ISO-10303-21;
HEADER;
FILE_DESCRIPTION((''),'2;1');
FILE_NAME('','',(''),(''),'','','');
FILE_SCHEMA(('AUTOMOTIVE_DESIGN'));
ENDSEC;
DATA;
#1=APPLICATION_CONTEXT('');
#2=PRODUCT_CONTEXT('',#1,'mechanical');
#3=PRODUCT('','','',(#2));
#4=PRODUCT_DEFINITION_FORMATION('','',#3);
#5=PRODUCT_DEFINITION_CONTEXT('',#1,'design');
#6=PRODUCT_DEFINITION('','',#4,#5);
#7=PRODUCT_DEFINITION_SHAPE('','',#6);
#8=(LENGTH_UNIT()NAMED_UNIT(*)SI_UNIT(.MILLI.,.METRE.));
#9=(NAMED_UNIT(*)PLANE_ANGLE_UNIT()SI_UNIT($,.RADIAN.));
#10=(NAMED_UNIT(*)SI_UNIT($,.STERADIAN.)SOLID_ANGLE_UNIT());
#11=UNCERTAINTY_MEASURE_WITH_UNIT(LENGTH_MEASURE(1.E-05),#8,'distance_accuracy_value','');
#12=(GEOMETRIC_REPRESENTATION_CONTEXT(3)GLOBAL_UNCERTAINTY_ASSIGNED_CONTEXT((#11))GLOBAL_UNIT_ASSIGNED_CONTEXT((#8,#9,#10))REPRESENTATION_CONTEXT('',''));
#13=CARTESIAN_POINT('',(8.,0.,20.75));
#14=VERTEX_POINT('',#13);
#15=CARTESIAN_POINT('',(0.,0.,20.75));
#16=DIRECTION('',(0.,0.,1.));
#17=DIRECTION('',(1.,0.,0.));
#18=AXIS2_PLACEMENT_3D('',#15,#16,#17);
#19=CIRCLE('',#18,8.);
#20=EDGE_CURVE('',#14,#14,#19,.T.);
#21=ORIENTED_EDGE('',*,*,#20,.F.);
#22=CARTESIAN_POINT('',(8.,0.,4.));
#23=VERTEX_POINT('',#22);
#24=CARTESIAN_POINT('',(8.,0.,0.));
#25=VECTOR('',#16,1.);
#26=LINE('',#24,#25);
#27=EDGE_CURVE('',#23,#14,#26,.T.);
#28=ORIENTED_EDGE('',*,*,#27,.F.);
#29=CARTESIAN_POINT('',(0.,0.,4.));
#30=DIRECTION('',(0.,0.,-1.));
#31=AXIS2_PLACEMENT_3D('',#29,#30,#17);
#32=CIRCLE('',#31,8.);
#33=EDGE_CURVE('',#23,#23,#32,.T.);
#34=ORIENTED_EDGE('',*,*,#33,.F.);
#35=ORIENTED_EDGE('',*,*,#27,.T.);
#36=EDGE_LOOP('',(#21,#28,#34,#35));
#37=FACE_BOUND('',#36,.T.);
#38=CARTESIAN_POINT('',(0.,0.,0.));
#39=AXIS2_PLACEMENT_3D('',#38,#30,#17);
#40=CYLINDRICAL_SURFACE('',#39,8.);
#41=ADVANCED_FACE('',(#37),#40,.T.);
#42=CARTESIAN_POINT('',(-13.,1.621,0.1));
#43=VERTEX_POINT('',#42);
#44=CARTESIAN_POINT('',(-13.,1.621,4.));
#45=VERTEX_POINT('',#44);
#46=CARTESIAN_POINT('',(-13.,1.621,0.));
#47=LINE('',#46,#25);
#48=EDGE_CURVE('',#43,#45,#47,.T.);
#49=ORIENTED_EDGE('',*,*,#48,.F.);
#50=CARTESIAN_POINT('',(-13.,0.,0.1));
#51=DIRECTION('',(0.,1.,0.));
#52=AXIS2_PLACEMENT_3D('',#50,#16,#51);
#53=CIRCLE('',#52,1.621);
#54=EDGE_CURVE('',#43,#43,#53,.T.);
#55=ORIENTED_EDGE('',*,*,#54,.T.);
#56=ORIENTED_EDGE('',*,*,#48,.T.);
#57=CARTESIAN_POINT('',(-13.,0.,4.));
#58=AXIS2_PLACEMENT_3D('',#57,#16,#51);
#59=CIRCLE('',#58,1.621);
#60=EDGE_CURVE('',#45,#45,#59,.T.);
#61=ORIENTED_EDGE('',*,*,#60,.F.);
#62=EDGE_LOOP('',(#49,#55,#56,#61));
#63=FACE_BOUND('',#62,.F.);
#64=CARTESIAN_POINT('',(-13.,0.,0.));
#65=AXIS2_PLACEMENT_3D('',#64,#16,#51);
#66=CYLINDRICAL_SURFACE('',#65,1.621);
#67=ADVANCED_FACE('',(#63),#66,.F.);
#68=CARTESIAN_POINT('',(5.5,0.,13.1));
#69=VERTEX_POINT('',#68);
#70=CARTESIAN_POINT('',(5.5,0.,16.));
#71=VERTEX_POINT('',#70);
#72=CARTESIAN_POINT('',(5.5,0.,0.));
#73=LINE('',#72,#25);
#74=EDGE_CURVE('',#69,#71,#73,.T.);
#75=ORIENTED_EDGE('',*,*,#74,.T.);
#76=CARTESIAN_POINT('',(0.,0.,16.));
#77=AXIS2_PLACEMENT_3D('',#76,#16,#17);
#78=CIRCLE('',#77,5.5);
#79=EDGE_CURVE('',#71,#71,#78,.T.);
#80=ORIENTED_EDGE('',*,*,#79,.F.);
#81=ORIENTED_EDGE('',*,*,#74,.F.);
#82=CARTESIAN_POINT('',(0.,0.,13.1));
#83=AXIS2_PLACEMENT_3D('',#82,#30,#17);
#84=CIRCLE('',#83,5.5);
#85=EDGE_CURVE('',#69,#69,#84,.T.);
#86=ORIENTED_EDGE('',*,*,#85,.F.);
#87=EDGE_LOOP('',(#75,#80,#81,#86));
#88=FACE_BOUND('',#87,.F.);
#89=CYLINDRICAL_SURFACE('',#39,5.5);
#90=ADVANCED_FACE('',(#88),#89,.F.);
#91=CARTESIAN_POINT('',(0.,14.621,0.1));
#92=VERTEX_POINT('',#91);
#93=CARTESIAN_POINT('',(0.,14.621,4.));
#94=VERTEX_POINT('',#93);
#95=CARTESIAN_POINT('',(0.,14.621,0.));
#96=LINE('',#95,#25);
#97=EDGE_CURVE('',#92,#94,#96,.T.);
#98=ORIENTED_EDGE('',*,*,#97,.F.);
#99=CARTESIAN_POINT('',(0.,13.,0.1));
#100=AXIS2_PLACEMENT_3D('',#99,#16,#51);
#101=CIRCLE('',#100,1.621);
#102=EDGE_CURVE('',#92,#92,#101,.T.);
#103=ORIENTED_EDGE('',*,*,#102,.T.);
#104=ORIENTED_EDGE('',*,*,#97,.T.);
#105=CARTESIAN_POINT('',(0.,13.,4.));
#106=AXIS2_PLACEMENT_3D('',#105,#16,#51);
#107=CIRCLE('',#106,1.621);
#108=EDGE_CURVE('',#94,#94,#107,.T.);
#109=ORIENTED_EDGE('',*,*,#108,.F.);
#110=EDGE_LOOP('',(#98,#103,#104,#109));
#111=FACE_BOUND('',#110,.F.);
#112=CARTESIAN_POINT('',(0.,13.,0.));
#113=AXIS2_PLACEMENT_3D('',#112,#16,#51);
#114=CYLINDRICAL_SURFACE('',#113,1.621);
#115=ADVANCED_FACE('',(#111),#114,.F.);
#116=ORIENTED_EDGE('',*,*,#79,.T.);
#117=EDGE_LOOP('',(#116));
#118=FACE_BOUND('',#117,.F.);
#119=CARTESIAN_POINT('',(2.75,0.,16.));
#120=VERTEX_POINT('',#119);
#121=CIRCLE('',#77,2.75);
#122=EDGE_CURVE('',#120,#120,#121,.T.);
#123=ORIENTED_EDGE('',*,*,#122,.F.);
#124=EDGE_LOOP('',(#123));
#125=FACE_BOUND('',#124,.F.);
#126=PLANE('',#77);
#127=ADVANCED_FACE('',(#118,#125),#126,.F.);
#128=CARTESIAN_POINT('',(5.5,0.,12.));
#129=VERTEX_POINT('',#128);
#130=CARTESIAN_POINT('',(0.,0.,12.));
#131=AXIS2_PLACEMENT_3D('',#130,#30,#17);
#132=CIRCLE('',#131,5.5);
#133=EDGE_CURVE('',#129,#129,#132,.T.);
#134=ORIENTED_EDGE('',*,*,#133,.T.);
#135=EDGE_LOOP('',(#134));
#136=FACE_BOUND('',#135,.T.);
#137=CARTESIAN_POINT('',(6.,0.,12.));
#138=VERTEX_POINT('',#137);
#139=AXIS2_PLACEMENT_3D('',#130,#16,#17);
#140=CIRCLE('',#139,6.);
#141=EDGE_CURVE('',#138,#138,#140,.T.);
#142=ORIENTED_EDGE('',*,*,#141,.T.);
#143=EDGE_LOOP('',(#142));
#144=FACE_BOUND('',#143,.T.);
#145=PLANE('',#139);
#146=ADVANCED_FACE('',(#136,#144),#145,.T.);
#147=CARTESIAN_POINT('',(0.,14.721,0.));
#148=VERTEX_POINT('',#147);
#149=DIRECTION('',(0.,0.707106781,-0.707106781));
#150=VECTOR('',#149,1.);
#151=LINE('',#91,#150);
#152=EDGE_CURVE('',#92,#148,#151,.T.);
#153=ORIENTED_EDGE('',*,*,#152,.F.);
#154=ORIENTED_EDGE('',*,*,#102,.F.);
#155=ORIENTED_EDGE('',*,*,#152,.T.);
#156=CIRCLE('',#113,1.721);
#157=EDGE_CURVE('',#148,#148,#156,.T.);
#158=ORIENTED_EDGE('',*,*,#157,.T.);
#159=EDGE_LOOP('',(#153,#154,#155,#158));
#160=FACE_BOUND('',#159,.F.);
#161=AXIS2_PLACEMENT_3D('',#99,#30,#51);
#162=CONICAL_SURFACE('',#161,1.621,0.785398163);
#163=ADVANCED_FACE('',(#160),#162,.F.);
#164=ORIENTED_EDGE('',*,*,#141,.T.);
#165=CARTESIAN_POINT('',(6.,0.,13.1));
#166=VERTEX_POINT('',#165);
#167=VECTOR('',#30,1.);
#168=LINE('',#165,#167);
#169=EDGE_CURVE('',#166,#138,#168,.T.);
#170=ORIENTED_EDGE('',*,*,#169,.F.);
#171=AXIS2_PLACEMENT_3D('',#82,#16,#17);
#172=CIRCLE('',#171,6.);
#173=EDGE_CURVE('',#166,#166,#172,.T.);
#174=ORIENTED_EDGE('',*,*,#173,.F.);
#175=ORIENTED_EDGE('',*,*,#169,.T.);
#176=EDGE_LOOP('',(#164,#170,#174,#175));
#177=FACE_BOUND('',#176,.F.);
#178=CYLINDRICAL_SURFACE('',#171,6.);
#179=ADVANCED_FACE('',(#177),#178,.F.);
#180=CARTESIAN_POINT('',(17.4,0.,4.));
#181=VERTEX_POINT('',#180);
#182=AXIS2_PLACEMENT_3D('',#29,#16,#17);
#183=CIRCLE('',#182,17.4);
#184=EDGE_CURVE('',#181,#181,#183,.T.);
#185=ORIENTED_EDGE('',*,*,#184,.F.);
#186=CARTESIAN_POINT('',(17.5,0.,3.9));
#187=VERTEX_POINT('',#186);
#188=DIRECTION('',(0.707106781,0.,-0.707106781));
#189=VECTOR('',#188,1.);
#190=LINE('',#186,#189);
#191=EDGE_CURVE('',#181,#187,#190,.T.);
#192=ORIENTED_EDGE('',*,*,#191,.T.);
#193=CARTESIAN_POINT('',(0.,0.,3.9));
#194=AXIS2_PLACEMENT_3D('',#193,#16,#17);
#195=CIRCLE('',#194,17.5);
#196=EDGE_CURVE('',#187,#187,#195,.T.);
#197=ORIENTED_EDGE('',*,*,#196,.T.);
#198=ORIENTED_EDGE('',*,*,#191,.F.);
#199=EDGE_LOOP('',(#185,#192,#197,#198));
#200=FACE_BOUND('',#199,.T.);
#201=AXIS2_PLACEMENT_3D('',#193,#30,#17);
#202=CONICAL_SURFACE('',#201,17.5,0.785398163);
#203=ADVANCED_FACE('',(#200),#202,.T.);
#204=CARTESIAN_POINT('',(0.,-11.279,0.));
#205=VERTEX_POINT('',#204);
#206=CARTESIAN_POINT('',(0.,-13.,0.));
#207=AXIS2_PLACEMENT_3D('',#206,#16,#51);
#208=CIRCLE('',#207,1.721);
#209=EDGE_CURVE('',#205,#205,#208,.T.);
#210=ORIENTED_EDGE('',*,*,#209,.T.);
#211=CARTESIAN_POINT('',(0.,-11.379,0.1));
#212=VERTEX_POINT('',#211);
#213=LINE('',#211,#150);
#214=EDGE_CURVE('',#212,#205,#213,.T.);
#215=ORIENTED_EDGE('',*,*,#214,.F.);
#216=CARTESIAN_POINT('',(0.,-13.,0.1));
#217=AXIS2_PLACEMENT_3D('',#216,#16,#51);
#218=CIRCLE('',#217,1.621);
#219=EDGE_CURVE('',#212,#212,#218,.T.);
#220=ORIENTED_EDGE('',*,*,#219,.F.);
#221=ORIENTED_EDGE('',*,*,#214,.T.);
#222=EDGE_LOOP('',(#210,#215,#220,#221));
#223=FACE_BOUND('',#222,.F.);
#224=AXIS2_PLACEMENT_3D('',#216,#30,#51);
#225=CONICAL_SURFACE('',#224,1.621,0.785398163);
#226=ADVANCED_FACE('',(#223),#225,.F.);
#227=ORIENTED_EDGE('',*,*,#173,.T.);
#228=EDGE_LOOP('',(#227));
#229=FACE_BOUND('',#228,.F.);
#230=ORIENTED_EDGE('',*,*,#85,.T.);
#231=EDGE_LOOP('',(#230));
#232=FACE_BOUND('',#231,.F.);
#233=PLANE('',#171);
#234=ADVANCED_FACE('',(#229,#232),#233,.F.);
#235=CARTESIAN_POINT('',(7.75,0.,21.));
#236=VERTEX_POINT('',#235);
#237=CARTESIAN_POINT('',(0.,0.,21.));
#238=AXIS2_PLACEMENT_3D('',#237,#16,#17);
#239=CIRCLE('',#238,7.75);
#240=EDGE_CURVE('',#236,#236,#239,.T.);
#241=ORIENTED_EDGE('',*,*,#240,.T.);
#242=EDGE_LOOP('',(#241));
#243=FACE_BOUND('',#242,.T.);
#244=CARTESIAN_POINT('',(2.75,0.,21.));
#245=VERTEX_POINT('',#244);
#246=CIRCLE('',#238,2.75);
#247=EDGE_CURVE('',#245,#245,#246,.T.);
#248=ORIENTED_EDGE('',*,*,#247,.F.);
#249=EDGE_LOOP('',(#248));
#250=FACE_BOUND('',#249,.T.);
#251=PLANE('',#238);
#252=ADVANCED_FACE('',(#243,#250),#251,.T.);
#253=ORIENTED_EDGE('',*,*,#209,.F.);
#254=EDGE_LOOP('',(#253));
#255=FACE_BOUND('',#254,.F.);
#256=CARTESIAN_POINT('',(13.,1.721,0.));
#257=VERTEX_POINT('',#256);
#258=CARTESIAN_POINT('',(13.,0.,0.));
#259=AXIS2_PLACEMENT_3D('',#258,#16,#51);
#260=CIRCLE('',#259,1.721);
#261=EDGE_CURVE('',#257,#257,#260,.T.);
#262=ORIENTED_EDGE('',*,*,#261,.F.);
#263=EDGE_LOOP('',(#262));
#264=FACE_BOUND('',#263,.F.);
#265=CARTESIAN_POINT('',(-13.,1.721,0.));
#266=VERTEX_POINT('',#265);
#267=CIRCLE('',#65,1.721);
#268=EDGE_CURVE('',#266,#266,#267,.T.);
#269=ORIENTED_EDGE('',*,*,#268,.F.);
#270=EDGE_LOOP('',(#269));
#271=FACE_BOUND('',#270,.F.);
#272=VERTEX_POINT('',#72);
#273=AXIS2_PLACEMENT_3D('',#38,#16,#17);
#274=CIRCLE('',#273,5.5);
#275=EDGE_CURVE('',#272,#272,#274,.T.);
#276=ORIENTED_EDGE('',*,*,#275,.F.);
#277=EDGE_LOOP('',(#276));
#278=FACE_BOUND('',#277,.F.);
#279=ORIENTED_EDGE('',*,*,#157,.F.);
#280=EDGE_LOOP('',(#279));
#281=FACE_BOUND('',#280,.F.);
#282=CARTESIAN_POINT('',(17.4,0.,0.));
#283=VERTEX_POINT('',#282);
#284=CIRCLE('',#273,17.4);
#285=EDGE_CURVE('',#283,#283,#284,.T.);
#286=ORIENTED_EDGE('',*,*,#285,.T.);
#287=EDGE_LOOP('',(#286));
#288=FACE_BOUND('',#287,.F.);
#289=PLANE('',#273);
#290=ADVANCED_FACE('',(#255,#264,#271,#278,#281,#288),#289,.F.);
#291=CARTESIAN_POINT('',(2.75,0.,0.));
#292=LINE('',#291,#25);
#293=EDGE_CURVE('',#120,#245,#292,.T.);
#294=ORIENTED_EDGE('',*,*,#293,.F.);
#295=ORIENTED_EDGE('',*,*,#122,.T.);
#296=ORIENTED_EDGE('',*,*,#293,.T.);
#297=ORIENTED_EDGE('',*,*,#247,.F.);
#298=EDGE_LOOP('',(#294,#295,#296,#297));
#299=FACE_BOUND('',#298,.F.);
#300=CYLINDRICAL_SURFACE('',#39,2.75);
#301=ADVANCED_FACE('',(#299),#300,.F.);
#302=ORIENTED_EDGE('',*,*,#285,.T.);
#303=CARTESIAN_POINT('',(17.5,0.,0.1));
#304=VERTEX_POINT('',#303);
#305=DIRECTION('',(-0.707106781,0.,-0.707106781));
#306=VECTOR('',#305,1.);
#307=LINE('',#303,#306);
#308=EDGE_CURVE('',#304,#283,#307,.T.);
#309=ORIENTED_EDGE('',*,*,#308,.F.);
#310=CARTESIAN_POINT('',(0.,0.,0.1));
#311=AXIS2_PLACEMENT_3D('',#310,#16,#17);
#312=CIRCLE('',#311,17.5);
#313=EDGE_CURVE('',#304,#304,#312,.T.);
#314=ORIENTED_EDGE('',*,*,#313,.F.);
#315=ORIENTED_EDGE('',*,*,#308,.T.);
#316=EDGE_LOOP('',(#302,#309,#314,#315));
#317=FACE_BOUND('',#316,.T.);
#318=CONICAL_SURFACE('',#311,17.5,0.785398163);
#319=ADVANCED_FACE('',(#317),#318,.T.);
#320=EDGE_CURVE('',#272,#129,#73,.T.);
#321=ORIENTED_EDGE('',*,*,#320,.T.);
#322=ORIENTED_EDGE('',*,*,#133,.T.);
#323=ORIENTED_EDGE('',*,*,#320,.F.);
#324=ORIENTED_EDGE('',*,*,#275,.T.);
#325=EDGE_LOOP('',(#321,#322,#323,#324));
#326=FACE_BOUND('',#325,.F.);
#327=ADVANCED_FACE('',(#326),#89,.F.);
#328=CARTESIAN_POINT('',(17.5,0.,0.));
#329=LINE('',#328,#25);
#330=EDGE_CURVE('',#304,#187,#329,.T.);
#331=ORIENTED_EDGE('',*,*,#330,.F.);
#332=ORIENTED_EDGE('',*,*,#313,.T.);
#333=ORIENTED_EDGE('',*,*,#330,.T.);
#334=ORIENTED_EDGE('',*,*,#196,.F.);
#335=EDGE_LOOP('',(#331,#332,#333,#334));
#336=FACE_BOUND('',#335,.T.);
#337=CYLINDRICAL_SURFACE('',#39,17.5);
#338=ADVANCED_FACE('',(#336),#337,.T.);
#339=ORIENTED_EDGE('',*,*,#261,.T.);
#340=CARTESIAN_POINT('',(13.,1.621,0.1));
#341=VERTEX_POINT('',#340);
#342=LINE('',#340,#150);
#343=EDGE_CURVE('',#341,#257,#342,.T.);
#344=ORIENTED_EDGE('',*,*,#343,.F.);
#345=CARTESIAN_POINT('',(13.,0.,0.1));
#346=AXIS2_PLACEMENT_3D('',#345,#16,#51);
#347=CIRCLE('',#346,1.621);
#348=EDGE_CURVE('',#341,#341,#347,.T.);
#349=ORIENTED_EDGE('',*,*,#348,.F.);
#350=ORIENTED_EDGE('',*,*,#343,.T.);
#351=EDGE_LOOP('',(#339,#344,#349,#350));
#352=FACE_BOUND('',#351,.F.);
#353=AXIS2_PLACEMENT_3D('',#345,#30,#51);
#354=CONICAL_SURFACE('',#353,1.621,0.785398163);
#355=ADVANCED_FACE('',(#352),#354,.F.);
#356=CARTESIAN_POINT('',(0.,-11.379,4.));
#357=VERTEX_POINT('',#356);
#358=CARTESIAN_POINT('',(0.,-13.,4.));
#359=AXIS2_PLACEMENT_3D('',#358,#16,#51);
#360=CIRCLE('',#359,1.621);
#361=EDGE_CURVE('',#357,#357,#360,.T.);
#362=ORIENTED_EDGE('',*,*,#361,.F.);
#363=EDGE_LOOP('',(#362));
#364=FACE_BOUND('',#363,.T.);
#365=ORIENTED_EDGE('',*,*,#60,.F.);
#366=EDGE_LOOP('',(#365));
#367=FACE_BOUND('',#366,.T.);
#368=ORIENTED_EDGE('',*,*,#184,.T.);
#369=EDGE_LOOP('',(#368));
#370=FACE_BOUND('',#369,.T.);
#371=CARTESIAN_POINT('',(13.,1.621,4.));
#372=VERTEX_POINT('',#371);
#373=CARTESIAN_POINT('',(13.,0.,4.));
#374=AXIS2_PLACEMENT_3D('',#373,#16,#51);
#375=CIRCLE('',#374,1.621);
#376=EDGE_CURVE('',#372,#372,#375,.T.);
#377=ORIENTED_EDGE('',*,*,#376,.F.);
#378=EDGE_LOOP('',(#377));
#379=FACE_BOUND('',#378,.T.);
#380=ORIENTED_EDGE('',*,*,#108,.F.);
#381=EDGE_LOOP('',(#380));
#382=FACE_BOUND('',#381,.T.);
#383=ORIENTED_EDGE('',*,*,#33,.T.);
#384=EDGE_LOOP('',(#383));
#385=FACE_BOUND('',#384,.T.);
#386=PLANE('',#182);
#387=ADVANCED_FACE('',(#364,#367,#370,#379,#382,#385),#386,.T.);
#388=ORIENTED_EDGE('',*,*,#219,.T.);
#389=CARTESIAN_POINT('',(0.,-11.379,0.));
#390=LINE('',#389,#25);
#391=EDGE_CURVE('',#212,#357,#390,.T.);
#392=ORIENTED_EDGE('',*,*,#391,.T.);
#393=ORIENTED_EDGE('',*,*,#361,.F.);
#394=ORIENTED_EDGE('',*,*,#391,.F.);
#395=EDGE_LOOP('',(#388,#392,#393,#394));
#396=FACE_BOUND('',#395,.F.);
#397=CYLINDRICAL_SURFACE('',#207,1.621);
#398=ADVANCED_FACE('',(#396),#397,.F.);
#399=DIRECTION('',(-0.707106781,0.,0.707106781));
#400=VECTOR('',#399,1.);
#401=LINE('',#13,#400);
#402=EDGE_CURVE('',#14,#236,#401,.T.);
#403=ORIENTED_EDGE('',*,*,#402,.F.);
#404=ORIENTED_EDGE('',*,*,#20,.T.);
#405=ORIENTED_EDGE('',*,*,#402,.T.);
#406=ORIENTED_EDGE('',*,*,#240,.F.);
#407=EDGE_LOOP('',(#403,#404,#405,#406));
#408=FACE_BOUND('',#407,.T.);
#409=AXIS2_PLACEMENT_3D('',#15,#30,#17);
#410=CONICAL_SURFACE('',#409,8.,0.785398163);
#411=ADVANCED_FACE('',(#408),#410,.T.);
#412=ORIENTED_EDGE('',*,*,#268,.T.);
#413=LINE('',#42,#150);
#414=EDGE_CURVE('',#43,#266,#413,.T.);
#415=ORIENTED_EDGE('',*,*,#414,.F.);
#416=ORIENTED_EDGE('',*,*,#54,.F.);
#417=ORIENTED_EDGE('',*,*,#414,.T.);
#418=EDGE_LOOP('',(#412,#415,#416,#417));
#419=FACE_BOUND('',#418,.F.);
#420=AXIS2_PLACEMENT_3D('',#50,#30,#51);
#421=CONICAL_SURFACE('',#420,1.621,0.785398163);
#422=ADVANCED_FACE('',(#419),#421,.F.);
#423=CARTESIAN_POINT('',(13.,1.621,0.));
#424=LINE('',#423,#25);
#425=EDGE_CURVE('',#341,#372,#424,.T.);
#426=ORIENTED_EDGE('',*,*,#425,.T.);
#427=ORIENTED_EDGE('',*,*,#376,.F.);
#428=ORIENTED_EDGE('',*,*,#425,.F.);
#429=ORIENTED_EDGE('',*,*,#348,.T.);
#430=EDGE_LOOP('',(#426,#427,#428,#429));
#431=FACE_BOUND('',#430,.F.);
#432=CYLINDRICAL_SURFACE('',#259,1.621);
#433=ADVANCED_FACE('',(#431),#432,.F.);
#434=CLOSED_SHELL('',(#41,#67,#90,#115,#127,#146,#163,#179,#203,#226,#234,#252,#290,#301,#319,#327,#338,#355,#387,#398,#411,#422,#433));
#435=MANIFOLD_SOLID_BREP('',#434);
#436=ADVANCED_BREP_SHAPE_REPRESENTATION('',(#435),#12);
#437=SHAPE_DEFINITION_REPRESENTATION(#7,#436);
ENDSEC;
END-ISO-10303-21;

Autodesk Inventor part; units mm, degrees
ref_plane "YZ Plane" through (0, 0, 0) normal (1, 0, 0) x (0, 1, 0)
ref_plane "XZ Plane" through (0, 0, 0) normal (0, 1, 0) x (-1, 0, 0)
sketch "Sketch1" plane through (0, 0, 0) normal (0, 0, 1) x (1, 0, 0)
  circle A0 centre (0, 0) radius 17.5
  circle A1 centre (0, 0) radius 8
  circle A2 centre (0, 0) radius 5.5
  circle A3 centre (0, 0) radius 2.75
  circle A4 centre (0, 0) radius 13 construction
  point P0 (0, 13)
  point P1 (-13, 0)
  point P2 (0, -13)
  point P3 (13, 0)
  dimension "d10" = 26
  dimension "d0" = 35
  dimension "d1" = 16
  dimension "d2" = 11
  dimension "d3" = 5.5
  dimension "d13" = 360
extrude "Extrusion1" add sketch "Sketch1" along normal blind 4 contours A0 | A1 | A2
extrude "Extrusion2" add sketch "Sketch1" along normal blind 21 contours A1 | A2
extrude "Extrusion3" cut sketch "Sketch1" along normal blind 16 contours A2
hole "Hole1" at (0, -13, 0) at (13, 0, 0) at (0, 13, 0) at (-13, 0, 0) direction (0, 0, 1) diameter 3.242 end through all thread size "M4x0.7" class "6H" standard "ISO Metric profile"
ref_plane "Work Plane1" through (0, 0, 13.1) normal (0, 0, 1) x (1, 0, 0)
sketch "Sketch2" plane through (0, 0, 13.1) normal (0, 0, 1) x (1, 0, 0)
  circle A0 centre (0, 0) radius 6
  dimension "d23" = 12
extrude "Extrusion4" cut sketch "Sketch2" against normal blind 1.1
chamfer "Chamfer1" distance 0.25 angle 45 1 edges at (-8, 0, 21)
chamfer "Chamfer2" distance 0.1 angle 45 6 edges at (-17.5, 0, 4) (-17.5, 0, 0) (-13, -1.621, 0) (0, -14.621, 0) (0, 11.379, 0) (13, -1.621, 0)
properties part number "BearingSuport"
